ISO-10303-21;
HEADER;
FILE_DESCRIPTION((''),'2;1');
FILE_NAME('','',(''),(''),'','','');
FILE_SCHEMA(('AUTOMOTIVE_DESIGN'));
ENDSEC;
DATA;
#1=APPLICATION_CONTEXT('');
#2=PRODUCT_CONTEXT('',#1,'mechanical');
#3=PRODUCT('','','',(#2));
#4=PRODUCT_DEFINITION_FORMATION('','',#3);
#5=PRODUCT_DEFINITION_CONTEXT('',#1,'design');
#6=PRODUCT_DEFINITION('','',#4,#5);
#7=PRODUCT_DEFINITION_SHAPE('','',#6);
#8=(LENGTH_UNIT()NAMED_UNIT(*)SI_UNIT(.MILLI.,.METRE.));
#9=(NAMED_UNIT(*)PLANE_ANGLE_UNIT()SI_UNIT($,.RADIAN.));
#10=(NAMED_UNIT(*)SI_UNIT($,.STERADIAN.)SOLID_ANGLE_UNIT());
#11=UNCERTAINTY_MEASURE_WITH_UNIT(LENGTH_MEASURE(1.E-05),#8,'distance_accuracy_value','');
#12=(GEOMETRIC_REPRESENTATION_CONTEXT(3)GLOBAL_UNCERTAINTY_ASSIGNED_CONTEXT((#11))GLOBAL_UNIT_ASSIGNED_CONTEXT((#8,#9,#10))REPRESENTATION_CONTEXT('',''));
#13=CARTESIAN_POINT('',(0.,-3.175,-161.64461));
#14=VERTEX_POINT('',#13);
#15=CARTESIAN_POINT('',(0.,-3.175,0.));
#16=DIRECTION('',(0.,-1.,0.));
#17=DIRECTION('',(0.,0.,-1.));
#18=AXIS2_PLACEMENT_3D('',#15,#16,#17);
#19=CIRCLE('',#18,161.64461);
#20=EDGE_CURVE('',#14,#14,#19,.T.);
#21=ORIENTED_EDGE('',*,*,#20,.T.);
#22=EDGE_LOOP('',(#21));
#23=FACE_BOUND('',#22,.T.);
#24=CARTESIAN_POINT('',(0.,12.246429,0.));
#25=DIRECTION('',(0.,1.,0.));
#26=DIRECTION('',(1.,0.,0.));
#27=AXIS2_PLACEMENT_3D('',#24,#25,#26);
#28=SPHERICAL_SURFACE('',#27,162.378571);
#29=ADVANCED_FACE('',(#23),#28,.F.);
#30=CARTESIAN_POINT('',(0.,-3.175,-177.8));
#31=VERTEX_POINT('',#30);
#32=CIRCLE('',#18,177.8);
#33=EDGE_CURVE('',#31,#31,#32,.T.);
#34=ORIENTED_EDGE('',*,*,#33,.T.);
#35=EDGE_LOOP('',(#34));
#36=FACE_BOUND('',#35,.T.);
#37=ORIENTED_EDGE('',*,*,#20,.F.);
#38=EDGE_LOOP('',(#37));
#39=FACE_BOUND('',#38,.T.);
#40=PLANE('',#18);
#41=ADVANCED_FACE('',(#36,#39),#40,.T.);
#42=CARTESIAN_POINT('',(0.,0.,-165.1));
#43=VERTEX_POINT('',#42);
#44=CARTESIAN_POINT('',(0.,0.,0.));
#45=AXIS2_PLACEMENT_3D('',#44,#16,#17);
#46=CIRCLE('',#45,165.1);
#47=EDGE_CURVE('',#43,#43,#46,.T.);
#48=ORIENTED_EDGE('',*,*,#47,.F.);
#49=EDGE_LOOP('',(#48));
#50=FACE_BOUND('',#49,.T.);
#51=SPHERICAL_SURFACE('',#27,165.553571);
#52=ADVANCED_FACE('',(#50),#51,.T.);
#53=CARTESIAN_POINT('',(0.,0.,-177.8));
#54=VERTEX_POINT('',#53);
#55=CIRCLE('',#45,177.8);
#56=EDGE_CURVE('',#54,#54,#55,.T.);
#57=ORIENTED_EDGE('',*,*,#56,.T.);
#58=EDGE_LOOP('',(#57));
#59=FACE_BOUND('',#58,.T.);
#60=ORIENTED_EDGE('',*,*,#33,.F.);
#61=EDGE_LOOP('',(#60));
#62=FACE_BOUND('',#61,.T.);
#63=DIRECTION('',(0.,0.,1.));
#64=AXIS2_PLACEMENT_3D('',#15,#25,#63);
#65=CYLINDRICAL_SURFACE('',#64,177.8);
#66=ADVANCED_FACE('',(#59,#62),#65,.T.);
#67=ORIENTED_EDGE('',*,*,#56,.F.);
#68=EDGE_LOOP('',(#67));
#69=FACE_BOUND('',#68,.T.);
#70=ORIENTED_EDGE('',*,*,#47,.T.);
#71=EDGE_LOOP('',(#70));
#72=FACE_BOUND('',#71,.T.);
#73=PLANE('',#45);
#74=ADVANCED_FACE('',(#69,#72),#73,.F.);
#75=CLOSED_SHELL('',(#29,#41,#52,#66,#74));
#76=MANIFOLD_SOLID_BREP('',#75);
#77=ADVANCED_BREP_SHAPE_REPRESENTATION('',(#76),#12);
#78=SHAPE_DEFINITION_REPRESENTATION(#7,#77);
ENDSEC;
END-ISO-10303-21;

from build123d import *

# Parameters (mm, degrees)
SKETCH3_R           = 177.8
BOSS_EXTRUDE1_DEPTH = 3.175


# Read off the part's stored shape, not the designer's step: Shell1
with BuildPart() as part:
    # Sketch1 → Revolve1 (revolve)
    with BuildSketch(Plane.XY):
        with BuildLine():
            Line((0, 177.8), (0, 0))
            Line((0, 0), (165.1, 0))
            ThreePointArc((165.1, 0), (121.316579658, 124.897538254), (0, 177.8))
        make_face()
    revolve(axis=Axis((0, 177.8, 0), (0, -1, 0)))

    # Sketch3 → Boss-Extrude1 (add)
    with BuildSketch(Plane.XZ):
        with Locations(Location((0, 0, 0), (0, 0, 270))):
            Circle(SKETCH3_R)
    extrude(amount=BOSS_EXTRUDE1_DEPTH)

    # Shell1 outline → Shell1 (revolve, cut)
    with BuildSketch(Plane.XY):
        with BuildLine():
            ThreePointArc((161.64461017, -3.1750001), (120.147638379, 121.477126871), (0, 174.625))
            Line((0, 174.625), (0, -3.1750001))
            Line((0, -3.1750001), (161.64461017, -3.1750001))
        make_face()
    revolve(axis=Axis((0, 0, 0), (0, 1, 0)), mode=Mode.SUBTRACT)


solid = part.part
